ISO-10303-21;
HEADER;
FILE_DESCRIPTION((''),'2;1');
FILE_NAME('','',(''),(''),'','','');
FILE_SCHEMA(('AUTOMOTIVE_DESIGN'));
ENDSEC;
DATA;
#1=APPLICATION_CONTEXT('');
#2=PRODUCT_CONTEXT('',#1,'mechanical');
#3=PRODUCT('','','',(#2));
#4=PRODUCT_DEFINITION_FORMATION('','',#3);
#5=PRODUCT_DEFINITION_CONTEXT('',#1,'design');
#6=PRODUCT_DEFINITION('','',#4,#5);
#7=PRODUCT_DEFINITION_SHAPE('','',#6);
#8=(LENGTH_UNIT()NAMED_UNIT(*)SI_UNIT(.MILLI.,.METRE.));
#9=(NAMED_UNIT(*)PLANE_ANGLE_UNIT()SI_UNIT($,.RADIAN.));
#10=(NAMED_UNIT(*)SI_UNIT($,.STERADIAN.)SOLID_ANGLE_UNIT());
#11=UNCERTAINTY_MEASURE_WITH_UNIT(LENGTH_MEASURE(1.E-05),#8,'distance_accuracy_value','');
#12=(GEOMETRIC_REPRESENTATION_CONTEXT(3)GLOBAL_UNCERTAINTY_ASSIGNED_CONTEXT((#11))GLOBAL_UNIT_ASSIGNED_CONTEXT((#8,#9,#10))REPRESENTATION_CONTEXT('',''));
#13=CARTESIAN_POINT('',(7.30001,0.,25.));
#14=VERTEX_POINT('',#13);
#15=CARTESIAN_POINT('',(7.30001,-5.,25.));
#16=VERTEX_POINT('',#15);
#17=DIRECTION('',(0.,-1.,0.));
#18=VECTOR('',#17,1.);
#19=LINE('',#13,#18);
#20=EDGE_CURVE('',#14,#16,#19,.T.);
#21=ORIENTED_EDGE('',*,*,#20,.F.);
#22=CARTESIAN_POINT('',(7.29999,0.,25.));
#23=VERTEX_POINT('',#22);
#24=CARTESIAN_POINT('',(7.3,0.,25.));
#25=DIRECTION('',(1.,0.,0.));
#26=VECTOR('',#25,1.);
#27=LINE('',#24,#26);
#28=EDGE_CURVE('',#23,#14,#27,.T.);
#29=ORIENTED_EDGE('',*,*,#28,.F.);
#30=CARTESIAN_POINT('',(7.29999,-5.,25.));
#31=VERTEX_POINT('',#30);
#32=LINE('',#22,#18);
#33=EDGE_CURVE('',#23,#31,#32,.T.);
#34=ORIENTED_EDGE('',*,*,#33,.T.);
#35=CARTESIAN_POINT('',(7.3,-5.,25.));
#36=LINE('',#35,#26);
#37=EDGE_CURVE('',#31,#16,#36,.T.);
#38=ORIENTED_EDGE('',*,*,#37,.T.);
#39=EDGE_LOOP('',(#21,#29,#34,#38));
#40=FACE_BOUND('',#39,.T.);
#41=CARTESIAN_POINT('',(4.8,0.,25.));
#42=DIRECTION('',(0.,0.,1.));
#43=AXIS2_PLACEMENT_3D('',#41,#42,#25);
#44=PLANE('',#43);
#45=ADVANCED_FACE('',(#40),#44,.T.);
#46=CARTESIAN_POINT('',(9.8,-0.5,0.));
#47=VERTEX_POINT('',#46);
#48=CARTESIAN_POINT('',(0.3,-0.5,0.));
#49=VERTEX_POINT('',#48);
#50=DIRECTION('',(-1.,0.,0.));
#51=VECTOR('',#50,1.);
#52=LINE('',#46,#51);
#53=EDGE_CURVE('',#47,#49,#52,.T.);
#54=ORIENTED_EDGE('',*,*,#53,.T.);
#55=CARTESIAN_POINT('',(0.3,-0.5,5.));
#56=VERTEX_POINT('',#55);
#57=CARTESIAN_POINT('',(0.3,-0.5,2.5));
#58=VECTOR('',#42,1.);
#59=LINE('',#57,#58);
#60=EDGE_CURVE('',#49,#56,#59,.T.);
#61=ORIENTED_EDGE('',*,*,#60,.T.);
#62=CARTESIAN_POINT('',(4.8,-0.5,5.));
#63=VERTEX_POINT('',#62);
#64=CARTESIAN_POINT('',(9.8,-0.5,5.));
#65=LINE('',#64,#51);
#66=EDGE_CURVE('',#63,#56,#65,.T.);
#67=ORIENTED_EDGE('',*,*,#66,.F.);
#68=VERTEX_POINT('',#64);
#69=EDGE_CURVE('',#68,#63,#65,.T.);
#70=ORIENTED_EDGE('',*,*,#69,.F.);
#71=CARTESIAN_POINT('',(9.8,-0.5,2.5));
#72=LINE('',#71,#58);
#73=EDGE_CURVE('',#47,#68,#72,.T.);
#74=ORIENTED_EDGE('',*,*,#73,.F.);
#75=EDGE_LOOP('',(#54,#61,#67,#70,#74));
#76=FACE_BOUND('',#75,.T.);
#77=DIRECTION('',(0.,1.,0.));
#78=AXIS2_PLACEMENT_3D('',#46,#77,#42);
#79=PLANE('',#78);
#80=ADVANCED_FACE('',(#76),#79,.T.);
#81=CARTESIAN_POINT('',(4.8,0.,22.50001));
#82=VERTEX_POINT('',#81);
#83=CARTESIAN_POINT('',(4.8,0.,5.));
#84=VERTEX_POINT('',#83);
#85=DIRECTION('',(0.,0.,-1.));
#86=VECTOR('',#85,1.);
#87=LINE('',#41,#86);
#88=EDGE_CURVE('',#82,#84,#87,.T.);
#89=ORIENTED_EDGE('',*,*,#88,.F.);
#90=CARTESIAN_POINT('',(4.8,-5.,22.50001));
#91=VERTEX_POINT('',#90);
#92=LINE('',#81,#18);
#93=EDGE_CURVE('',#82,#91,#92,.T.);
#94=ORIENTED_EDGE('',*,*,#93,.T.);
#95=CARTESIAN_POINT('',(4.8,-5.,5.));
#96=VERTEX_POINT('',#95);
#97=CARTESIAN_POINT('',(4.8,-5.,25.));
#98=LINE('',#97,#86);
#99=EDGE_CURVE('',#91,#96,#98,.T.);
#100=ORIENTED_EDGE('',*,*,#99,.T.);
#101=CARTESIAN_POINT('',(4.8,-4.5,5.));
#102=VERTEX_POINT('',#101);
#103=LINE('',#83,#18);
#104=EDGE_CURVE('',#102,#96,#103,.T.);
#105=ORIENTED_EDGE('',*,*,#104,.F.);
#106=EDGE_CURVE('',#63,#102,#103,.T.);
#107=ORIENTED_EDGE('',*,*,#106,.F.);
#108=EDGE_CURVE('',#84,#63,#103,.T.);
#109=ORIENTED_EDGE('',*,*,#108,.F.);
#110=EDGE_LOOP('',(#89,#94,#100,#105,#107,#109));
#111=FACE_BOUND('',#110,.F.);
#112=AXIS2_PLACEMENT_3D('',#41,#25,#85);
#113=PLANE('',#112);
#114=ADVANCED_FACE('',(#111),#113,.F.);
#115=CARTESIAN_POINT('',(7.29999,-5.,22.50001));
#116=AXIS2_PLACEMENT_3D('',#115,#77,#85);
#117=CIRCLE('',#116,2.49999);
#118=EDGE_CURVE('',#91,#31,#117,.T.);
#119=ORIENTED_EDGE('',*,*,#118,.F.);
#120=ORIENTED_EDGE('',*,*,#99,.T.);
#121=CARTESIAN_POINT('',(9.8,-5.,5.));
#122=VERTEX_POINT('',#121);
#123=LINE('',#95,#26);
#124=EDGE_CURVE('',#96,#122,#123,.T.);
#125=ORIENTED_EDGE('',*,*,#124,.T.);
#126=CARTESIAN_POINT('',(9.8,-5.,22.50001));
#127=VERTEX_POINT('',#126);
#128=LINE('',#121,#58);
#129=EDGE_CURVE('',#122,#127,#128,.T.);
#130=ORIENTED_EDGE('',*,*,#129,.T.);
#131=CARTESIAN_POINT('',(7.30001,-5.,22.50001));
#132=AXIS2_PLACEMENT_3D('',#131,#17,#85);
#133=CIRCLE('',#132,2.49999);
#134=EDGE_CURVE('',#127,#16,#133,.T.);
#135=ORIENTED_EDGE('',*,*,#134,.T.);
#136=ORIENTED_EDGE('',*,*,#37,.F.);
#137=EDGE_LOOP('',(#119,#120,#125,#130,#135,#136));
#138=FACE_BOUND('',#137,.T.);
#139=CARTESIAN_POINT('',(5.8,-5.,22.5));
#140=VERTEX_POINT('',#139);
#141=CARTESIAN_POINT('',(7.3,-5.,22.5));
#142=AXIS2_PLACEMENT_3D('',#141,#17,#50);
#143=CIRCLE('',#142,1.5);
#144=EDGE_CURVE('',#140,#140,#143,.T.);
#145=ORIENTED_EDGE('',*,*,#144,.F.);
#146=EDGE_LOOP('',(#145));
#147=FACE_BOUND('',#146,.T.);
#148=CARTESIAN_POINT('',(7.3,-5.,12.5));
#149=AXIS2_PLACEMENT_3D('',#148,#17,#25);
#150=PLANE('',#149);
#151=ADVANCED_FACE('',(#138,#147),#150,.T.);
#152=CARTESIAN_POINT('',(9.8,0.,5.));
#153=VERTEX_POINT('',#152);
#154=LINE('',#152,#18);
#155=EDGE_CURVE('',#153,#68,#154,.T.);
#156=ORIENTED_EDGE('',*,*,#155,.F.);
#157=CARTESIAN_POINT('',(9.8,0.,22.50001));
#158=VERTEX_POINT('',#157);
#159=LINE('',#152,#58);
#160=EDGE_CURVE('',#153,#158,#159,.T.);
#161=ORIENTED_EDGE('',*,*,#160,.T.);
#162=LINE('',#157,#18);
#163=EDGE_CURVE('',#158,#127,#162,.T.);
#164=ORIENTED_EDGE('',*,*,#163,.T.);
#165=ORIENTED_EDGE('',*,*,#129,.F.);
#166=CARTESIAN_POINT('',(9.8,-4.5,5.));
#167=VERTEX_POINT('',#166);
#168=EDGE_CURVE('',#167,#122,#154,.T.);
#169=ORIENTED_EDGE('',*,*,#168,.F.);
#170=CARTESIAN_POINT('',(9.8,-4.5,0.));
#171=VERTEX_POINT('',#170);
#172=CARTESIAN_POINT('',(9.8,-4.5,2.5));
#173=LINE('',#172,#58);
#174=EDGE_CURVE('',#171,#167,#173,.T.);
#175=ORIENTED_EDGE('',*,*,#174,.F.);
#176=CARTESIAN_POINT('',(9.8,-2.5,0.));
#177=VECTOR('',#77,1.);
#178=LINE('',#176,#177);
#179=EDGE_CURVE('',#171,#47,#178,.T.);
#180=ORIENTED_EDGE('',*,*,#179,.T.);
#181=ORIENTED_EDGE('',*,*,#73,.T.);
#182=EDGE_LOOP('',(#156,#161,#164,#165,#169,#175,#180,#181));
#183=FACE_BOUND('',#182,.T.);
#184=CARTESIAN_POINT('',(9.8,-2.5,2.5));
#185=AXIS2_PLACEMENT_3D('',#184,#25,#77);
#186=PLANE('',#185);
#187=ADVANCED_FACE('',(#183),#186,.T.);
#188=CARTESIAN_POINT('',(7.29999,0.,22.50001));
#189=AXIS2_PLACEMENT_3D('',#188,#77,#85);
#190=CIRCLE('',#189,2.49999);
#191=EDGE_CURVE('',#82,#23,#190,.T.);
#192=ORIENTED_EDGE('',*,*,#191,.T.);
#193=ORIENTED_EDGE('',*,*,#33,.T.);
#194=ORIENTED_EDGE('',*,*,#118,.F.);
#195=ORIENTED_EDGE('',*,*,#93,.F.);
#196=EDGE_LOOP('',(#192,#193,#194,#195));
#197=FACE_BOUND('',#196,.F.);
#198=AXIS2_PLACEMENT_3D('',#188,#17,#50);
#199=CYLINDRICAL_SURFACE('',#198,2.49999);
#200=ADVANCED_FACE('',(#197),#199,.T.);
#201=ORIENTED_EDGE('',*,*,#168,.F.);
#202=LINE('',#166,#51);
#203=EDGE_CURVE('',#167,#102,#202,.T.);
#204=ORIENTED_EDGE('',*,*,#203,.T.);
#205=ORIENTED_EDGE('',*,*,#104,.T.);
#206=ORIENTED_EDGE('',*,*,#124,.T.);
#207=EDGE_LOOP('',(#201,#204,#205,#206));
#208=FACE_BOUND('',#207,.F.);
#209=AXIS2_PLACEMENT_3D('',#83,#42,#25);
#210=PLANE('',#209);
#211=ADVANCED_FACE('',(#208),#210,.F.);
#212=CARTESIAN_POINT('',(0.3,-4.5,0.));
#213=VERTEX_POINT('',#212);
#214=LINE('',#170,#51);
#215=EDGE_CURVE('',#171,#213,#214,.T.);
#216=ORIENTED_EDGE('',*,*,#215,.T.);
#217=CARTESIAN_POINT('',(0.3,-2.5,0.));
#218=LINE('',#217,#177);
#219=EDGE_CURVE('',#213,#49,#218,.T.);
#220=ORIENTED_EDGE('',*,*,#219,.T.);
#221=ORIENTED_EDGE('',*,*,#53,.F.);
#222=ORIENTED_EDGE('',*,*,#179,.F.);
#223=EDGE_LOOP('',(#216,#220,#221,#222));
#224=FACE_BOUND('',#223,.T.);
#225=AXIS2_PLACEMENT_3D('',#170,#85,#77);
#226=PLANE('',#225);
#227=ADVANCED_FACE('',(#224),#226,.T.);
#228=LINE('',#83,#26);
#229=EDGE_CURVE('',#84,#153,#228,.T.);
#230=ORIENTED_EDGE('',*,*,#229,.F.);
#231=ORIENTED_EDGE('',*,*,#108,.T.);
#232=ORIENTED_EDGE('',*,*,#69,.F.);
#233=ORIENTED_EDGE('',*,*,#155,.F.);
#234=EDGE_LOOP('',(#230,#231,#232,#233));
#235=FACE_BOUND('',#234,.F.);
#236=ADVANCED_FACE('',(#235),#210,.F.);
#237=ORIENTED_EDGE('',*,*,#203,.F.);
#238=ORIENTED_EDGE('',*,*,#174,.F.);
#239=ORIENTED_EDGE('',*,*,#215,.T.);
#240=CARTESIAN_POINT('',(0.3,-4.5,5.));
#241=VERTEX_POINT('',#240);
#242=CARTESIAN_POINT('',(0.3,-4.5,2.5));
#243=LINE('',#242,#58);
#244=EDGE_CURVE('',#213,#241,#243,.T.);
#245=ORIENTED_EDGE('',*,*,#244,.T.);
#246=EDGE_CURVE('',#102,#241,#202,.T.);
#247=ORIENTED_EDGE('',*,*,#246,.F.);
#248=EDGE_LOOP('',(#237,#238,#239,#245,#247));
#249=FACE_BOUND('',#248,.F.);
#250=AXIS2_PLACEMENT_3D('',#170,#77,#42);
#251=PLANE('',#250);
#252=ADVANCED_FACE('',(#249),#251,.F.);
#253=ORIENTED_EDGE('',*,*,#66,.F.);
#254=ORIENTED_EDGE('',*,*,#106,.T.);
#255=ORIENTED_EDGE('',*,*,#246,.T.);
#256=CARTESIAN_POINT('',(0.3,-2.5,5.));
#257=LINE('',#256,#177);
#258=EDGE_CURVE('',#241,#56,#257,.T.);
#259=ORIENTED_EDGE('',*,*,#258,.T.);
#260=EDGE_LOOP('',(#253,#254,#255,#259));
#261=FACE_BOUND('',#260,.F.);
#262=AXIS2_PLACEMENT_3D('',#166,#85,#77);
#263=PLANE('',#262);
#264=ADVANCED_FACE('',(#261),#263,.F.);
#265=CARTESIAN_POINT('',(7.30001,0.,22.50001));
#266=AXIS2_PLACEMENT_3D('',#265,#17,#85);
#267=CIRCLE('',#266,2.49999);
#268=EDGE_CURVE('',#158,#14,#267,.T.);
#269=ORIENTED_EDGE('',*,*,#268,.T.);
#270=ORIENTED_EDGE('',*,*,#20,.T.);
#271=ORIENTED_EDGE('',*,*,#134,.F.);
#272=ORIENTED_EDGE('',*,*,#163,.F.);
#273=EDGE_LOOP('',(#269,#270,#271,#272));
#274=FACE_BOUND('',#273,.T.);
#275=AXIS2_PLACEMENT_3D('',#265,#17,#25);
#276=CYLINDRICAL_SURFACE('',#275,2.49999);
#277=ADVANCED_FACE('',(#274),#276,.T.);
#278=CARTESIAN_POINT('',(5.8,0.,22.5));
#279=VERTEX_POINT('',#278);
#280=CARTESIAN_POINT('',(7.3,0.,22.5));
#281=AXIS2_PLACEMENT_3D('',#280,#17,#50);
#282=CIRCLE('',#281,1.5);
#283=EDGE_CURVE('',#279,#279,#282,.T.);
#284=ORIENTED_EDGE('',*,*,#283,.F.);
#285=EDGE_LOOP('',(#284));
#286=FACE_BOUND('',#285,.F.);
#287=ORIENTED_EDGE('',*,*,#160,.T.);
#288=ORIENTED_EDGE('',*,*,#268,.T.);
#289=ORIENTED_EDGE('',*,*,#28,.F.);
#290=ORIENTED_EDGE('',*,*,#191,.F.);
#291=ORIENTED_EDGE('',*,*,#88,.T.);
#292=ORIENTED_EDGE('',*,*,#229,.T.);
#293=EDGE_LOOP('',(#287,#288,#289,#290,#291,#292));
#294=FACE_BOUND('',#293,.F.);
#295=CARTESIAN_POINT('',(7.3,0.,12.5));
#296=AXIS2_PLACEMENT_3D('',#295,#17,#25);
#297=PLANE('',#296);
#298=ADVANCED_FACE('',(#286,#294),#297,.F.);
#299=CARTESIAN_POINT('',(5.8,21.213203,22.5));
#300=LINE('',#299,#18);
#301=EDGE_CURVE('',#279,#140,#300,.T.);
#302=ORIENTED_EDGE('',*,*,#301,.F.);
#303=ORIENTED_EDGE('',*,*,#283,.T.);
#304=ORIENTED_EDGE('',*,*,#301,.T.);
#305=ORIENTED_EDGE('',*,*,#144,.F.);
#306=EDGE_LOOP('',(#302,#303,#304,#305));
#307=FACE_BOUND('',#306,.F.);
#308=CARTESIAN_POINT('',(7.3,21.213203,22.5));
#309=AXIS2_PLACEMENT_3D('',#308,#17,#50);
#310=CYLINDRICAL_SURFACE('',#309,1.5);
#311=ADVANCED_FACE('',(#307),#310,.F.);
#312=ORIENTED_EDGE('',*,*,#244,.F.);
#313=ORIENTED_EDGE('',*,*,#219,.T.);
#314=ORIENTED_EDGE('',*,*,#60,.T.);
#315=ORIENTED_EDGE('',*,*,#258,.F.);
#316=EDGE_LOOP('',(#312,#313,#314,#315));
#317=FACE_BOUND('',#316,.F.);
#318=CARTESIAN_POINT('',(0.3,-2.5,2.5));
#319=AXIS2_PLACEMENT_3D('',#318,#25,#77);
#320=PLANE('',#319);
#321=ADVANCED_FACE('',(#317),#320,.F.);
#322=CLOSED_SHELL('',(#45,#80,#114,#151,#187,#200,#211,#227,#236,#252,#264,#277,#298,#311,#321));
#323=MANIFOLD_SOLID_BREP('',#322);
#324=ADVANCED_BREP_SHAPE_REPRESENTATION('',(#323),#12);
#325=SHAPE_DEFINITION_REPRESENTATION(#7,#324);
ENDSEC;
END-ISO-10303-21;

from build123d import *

# Parameters (mm, degrees)
F0_W     = 5
F0_H     = 5
F1_DEPTH = 5
F2_D     = 3
F3_R     = 2.49999
F4_W     = 4
F4_H     = 5
F5_DEPTH = 9.5


# Not quite as in the source:
# - a fillet or chamfer is up to 0.001 mm smaller than in the source, because OpenCascade refuses the exact size


with BuildPart() as f1:
    # F0 (on Front) → F1 (new body)
    with BuildSketch(Plane.XZ):
        Polygon((4.8, 5), (9.8, 5), (9.8, 15), (9.8, 20), (4.8, 20), align=None)
        with Locations((7.3, 22.5)):
            Rectangle(F0_W, F0_H)
    extrude(amount=F1_DEPTH)

    # F2 (through all)
    with Locations(Plane(origin=(0, 0, 0), x_dir=(1, 0, 0), z_dir=(0, 1, 0))):
        with Locations((7.3, -22.5)):
            Hole(F2_D / 2)

    # F3 (radius 2.5 in the source; OpenCascade refuses exactly that, so slightly less here)
    f3_edges = [f1.edges().sort_by_distance(p)[0] for p in [
        (4.8, -2.5, 25),
        (9.8, -2.5, 25),
    ]]
    fillet(f3_edges, radius=F3_R)

    # F4 (on face) → F5 (join)
    with BuildSketch(Plane.YZ.offset(9.8)):
        with Locations((-2.5, 2.5)):
            Rectangle(F4_W, F4_H)
    extrude(amount=-F5_DEPTH)


solid = f1.part
